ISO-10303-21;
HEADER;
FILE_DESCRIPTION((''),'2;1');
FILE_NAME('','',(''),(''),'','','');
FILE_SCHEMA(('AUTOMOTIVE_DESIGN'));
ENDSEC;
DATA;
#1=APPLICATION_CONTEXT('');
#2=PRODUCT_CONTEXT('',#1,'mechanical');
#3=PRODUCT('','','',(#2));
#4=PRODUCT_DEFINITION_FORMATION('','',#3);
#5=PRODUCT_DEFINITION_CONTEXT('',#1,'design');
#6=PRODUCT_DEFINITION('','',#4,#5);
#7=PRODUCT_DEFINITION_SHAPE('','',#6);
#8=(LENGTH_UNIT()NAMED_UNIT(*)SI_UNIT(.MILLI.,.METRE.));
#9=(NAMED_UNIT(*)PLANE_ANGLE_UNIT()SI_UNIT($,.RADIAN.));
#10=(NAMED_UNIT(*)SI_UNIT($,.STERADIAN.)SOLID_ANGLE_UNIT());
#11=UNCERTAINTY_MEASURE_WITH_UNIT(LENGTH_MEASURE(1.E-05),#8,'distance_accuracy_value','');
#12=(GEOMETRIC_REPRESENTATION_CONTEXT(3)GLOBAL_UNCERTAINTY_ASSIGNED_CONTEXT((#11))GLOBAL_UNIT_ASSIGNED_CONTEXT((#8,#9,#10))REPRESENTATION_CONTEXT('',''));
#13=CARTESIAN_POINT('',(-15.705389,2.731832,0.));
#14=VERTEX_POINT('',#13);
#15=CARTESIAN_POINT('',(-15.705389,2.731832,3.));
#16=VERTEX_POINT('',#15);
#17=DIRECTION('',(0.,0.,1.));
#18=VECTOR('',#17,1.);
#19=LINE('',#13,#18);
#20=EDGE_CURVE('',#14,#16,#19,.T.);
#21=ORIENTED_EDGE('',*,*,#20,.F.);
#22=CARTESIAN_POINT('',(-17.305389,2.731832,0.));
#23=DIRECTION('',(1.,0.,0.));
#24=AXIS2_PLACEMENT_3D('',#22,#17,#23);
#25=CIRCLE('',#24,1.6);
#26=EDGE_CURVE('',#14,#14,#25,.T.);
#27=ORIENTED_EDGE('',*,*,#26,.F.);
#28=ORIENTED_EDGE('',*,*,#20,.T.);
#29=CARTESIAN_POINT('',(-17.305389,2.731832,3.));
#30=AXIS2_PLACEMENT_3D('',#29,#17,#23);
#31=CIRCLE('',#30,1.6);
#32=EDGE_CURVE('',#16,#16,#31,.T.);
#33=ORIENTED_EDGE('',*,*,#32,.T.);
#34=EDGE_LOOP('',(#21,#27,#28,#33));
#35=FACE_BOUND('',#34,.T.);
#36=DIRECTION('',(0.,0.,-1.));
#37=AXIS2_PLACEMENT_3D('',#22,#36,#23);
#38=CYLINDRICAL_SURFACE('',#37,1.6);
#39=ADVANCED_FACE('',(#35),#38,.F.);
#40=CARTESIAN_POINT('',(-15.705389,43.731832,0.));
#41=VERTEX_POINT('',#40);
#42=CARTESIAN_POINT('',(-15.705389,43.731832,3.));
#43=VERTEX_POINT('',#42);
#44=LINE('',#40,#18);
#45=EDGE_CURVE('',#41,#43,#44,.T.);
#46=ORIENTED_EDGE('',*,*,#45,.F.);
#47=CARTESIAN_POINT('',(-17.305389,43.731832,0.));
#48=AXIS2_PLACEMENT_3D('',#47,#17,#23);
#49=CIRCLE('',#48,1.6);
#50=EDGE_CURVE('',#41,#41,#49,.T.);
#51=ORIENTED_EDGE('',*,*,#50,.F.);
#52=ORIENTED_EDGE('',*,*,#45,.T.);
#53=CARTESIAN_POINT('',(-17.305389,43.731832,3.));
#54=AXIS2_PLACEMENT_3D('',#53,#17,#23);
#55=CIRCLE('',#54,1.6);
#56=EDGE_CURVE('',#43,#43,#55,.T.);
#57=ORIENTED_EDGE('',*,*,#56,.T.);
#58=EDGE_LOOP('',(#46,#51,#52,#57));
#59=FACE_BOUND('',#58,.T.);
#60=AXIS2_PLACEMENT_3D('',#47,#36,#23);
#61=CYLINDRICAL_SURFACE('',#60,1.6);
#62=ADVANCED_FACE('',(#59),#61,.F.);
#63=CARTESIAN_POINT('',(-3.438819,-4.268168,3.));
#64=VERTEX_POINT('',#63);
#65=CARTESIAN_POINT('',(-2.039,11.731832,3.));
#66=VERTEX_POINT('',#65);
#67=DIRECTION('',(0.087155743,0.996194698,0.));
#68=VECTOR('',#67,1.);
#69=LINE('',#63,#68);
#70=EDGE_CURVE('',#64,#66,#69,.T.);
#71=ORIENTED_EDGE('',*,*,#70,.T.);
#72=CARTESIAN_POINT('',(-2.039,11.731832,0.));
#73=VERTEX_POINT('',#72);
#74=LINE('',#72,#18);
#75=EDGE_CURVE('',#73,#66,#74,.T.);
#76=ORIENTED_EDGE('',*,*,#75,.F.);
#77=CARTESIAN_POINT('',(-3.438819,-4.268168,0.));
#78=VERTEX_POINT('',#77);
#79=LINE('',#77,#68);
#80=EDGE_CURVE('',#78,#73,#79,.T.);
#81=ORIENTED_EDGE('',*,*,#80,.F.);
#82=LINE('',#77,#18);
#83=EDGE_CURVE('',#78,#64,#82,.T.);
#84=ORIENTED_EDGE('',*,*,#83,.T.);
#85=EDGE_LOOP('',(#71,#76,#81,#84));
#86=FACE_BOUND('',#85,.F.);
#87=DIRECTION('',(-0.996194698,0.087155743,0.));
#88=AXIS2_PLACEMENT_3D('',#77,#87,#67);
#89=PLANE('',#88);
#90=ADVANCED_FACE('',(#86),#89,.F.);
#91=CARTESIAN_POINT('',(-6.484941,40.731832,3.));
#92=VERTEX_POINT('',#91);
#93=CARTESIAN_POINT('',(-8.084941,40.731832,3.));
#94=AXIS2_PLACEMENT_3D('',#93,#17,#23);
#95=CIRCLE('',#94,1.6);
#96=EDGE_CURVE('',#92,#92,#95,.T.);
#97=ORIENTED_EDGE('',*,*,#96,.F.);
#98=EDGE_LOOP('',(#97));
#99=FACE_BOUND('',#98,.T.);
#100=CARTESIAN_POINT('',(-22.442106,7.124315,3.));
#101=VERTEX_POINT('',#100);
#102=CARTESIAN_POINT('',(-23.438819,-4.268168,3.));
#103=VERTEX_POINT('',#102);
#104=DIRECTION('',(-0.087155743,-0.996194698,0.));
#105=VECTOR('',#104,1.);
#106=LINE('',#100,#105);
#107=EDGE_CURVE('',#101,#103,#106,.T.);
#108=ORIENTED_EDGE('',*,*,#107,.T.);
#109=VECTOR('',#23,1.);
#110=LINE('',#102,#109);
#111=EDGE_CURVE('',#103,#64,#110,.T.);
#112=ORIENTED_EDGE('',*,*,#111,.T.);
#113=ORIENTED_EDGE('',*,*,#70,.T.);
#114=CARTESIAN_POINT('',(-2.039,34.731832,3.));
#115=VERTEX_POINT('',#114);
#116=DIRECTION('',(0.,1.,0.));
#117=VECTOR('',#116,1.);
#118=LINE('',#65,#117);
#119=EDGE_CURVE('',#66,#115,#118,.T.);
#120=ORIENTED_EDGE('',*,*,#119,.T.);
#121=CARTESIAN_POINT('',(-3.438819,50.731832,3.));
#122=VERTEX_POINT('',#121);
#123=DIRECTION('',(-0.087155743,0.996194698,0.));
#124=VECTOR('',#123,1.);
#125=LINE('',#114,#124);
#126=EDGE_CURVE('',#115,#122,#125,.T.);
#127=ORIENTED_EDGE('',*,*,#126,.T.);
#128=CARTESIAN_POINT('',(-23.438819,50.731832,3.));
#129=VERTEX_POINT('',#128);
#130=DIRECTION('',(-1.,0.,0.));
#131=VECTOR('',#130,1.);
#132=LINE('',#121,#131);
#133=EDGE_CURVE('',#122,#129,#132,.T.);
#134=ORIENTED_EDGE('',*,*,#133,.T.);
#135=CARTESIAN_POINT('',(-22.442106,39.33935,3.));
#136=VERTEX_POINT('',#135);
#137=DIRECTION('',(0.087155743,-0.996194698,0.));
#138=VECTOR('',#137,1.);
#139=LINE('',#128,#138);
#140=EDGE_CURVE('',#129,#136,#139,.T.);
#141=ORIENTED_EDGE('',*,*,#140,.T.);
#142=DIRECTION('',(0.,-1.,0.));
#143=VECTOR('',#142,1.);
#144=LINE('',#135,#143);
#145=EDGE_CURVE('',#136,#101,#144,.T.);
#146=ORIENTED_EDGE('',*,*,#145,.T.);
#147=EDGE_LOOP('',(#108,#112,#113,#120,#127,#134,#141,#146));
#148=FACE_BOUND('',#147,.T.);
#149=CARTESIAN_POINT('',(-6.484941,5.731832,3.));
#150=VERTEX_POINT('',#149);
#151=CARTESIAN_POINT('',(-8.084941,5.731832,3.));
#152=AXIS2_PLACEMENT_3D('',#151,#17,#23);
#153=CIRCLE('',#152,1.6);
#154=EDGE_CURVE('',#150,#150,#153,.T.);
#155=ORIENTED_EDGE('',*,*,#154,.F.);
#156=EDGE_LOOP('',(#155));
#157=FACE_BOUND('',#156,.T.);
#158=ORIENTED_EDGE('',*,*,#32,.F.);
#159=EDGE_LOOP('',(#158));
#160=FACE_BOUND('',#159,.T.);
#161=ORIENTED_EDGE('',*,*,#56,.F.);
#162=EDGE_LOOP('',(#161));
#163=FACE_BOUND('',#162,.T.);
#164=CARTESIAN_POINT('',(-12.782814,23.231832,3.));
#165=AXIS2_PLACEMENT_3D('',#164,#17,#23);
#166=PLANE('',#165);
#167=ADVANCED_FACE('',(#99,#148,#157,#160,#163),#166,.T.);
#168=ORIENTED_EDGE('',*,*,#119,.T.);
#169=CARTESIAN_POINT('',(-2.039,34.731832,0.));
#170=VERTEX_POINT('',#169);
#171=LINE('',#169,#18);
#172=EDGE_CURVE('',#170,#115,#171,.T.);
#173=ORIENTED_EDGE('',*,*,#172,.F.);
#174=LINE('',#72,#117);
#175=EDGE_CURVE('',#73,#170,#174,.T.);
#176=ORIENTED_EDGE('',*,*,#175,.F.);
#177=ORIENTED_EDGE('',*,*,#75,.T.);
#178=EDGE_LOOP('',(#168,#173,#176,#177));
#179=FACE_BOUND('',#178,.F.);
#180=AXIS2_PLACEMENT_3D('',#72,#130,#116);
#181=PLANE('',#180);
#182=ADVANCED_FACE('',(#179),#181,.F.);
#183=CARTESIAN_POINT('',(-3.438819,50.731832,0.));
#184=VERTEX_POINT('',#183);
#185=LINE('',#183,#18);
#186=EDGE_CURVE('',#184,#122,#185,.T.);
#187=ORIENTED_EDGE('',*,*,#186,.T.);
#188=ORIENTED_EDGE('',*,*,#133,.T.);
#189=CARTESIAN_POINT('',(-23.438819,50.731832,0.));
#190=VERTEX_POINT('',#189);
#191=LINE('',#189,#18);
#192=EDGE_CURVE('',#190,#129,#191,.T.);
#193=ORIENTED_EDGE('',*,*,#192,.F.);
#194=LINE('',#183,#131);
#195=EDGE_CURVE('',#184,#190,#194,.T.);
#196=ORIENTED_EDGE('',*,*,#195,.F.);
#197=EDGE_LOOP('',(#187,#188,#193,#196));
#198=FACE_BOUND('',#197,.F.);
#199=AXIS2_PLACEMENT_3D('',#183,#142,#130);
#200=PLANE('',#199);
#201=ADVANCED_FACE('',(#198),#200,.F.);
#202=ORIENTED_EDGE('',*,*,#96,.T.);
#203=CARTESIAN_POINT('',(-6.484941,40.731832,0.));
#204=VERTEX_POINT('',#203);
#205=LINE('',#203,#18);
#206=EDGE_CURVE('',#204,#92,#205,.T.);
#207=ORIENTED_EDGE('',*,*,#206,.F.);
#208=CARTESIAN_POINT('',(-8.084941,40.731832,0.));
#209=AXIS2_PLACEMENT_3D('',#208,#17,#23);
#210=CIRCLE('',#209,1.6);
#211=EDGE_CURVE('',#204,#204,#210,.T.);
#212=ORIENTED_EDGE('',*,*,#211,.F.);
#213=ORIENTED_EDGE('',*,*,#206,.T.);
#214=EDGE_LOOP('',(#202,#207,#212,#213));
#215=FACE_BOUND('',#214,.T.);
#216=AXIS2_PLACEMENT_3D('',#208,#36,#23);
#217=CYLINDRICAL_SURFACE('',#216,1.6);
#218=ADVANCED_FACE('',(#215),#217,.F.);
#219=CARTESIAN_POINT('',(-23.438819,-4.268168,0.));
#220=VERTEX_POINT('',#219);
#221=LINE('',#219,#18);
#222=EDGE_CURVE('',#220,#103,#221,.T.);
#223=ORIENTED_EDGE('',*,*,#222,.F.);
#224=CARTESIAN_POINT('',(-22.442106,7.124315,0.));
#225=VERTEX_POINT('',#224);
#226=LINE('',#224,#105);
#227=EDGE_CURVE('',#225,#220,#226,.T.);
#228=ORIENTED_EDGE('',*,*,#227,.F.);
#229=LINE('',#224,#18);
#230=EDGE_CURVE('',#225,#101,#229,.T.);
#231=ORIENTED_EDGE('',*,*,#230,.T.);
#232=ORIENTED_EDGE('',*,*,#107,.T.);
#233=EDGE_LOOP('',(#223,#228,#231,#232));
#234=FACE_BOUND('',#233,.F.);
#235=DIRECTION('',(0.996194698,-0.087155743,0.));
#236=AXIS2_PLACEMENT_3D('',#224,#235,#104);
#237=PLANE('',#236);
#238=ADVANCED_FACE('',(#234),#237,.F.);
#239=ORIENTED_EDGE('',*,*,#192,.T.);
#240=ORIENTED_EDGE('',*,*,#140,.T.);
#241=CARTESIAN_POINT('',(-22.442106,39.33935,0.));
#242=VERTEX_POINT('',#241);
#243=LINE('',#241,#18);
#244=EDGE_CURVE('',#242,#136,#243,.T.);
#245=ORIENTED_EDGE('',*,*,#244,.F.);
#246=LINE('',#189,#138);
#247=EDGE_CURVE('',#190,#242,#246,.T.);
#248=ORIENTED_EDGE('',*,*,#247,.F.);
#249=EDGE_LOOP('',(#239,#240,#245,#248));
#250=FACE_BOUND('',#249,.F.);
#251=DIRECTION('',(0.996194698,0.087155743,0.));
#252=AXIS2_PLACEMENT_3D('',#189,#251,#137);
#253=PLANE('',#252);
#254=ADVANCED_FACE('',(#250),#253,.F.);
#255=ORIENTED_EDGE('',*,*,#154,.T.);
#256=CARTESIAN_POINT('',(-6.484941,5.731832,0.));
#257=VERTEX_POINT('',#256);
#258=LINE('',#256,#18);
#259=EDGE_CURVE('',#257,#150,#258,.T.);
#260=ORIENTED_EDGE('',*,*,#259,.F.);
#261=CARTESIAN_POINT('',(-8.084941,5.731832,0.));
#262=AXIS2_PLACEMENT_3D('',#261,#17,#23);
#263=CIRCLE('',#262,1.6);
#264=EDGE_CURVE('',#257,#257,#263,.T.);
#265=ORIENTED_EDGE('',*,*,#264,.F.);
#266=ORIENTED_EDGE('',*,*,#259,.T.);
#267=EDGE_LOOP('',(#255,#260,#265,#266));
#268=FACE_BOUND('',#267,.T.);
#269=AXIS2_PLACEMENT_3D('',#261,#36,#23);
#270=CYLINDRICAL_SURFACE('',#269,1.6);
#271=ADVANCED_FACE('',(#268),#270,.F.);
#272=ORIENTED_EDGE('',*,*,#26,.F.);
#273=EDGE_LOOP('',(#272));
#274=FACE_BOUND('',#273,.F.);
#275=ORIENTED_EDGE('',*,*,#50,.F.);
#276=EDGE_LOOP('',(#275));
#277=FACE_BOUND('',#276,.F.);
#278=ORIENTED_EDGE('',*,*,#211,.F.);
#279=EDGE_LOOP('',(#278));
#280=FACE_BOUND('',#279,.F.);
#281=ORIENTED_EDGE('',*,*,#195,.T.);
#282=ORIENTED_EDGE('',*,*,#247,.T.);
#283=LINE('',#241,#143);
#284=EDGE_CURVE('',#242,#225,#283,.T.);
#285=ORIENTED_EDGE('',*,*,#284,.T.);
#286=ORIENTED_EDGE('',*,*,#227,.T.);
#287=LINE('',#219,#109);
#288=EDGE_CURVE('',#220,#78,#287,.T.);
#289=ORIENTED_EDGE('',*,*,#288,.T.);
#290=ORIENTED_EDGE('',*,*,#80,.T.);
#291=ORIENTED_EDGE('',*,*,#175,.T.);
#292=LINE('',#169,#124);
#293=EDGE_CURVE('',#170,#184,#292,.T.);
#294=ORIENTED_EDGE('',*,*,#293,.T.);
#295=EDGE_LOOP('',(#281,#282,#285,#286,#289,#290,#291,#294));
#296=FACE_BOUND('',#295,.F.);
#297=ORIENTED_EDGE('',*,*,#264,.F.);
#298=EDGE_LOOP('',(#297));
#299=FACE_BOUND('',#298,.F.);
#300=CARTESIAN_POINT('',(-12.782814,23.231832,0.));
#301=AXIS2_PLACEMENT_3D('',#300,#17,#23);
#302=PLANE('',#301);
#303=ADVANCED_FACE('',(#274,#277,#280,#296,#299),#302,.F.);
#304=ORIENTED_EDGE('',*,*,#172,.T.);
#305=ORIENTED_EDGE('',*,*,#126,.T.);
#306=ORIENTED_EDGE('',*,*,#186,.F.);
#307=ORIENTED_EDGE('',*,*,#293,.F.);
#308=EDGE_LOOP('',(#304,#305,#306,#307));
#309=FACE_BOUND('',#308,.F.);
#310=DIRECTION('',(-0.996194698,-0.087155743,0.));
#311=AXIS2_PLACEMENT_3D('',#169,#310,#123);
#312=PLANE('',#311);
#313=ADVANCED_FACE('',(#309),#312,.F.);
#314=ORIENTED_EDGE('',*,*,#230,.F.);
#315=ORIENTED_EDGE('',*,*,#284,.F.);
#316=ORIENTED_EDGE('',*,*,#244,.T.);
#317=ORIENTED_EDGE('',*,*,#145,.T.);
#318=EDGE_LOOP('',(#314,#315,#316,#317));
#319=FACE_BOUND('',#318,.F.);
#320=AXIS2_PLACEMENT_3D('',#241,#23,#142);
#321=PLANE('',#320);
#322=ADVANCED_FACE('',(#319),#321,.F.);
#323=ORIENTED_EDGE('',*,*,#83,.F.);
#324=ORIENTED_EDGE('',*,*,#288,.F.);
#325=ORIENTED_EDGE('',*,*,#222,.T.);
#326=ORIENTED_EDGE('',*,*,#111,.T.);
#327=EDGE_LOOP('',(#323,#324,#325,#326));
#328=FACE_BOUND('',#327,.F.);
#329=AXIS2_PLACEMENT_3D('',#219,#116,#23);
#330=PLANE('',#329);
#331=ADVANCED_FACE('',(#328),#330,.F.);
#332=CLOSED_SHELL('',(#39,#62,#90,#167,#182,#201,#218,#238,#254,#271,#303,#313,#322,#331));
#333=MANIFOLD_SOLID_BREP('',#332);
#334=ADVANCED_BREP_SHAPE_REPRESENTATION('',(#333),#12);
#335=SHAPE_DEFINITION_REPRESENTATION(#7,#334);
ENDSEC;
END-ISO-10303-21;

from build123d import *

# Parameters (mm, degrees)
F0_R     = 1.6
F1_DEPTH = 3


# Not quite as in the source:
# - a feature names something its author has since deleted; it is built from what else it names


with BuildPart() as f1:
    # F0 (on Top) → F1 (new body)
    with BuildSketch(Plane.XY):
        Polygon((-3.4388185853, 50.7318324596), (-23.4388185853, 50.7318324596), (-22.4421055113, 39.3393498922), (-22.4421055113, 7.1243150269), (-23.4388185853, -4.2681675404), (-3.4388185853, -4.2681675404), (-2.0389999689, 11.7318324596), (-2.0389999689, 34.7318324596), align=None)
        with Locations((-17.3053888341, 2.7318324596)):
            Circle(F0_R, mode=Mode.SUBTRACT)
        with Locations((-8.0849410565, 5.7318324596)):
            Circle(F0_R, mode=Mode.SUBTRACT)
        with Locations((-17.3053888341, 43.7318324596)):
            Circle(F0_R, mode=Mode.SUBTRACT)
        with Locations((-8.0849410565, 40.7318324596)):
            Circle(F0_R, mode=Mode.SUBTRACT)
    extrude(amount=F1_DEPTH)


solid = f1.part
